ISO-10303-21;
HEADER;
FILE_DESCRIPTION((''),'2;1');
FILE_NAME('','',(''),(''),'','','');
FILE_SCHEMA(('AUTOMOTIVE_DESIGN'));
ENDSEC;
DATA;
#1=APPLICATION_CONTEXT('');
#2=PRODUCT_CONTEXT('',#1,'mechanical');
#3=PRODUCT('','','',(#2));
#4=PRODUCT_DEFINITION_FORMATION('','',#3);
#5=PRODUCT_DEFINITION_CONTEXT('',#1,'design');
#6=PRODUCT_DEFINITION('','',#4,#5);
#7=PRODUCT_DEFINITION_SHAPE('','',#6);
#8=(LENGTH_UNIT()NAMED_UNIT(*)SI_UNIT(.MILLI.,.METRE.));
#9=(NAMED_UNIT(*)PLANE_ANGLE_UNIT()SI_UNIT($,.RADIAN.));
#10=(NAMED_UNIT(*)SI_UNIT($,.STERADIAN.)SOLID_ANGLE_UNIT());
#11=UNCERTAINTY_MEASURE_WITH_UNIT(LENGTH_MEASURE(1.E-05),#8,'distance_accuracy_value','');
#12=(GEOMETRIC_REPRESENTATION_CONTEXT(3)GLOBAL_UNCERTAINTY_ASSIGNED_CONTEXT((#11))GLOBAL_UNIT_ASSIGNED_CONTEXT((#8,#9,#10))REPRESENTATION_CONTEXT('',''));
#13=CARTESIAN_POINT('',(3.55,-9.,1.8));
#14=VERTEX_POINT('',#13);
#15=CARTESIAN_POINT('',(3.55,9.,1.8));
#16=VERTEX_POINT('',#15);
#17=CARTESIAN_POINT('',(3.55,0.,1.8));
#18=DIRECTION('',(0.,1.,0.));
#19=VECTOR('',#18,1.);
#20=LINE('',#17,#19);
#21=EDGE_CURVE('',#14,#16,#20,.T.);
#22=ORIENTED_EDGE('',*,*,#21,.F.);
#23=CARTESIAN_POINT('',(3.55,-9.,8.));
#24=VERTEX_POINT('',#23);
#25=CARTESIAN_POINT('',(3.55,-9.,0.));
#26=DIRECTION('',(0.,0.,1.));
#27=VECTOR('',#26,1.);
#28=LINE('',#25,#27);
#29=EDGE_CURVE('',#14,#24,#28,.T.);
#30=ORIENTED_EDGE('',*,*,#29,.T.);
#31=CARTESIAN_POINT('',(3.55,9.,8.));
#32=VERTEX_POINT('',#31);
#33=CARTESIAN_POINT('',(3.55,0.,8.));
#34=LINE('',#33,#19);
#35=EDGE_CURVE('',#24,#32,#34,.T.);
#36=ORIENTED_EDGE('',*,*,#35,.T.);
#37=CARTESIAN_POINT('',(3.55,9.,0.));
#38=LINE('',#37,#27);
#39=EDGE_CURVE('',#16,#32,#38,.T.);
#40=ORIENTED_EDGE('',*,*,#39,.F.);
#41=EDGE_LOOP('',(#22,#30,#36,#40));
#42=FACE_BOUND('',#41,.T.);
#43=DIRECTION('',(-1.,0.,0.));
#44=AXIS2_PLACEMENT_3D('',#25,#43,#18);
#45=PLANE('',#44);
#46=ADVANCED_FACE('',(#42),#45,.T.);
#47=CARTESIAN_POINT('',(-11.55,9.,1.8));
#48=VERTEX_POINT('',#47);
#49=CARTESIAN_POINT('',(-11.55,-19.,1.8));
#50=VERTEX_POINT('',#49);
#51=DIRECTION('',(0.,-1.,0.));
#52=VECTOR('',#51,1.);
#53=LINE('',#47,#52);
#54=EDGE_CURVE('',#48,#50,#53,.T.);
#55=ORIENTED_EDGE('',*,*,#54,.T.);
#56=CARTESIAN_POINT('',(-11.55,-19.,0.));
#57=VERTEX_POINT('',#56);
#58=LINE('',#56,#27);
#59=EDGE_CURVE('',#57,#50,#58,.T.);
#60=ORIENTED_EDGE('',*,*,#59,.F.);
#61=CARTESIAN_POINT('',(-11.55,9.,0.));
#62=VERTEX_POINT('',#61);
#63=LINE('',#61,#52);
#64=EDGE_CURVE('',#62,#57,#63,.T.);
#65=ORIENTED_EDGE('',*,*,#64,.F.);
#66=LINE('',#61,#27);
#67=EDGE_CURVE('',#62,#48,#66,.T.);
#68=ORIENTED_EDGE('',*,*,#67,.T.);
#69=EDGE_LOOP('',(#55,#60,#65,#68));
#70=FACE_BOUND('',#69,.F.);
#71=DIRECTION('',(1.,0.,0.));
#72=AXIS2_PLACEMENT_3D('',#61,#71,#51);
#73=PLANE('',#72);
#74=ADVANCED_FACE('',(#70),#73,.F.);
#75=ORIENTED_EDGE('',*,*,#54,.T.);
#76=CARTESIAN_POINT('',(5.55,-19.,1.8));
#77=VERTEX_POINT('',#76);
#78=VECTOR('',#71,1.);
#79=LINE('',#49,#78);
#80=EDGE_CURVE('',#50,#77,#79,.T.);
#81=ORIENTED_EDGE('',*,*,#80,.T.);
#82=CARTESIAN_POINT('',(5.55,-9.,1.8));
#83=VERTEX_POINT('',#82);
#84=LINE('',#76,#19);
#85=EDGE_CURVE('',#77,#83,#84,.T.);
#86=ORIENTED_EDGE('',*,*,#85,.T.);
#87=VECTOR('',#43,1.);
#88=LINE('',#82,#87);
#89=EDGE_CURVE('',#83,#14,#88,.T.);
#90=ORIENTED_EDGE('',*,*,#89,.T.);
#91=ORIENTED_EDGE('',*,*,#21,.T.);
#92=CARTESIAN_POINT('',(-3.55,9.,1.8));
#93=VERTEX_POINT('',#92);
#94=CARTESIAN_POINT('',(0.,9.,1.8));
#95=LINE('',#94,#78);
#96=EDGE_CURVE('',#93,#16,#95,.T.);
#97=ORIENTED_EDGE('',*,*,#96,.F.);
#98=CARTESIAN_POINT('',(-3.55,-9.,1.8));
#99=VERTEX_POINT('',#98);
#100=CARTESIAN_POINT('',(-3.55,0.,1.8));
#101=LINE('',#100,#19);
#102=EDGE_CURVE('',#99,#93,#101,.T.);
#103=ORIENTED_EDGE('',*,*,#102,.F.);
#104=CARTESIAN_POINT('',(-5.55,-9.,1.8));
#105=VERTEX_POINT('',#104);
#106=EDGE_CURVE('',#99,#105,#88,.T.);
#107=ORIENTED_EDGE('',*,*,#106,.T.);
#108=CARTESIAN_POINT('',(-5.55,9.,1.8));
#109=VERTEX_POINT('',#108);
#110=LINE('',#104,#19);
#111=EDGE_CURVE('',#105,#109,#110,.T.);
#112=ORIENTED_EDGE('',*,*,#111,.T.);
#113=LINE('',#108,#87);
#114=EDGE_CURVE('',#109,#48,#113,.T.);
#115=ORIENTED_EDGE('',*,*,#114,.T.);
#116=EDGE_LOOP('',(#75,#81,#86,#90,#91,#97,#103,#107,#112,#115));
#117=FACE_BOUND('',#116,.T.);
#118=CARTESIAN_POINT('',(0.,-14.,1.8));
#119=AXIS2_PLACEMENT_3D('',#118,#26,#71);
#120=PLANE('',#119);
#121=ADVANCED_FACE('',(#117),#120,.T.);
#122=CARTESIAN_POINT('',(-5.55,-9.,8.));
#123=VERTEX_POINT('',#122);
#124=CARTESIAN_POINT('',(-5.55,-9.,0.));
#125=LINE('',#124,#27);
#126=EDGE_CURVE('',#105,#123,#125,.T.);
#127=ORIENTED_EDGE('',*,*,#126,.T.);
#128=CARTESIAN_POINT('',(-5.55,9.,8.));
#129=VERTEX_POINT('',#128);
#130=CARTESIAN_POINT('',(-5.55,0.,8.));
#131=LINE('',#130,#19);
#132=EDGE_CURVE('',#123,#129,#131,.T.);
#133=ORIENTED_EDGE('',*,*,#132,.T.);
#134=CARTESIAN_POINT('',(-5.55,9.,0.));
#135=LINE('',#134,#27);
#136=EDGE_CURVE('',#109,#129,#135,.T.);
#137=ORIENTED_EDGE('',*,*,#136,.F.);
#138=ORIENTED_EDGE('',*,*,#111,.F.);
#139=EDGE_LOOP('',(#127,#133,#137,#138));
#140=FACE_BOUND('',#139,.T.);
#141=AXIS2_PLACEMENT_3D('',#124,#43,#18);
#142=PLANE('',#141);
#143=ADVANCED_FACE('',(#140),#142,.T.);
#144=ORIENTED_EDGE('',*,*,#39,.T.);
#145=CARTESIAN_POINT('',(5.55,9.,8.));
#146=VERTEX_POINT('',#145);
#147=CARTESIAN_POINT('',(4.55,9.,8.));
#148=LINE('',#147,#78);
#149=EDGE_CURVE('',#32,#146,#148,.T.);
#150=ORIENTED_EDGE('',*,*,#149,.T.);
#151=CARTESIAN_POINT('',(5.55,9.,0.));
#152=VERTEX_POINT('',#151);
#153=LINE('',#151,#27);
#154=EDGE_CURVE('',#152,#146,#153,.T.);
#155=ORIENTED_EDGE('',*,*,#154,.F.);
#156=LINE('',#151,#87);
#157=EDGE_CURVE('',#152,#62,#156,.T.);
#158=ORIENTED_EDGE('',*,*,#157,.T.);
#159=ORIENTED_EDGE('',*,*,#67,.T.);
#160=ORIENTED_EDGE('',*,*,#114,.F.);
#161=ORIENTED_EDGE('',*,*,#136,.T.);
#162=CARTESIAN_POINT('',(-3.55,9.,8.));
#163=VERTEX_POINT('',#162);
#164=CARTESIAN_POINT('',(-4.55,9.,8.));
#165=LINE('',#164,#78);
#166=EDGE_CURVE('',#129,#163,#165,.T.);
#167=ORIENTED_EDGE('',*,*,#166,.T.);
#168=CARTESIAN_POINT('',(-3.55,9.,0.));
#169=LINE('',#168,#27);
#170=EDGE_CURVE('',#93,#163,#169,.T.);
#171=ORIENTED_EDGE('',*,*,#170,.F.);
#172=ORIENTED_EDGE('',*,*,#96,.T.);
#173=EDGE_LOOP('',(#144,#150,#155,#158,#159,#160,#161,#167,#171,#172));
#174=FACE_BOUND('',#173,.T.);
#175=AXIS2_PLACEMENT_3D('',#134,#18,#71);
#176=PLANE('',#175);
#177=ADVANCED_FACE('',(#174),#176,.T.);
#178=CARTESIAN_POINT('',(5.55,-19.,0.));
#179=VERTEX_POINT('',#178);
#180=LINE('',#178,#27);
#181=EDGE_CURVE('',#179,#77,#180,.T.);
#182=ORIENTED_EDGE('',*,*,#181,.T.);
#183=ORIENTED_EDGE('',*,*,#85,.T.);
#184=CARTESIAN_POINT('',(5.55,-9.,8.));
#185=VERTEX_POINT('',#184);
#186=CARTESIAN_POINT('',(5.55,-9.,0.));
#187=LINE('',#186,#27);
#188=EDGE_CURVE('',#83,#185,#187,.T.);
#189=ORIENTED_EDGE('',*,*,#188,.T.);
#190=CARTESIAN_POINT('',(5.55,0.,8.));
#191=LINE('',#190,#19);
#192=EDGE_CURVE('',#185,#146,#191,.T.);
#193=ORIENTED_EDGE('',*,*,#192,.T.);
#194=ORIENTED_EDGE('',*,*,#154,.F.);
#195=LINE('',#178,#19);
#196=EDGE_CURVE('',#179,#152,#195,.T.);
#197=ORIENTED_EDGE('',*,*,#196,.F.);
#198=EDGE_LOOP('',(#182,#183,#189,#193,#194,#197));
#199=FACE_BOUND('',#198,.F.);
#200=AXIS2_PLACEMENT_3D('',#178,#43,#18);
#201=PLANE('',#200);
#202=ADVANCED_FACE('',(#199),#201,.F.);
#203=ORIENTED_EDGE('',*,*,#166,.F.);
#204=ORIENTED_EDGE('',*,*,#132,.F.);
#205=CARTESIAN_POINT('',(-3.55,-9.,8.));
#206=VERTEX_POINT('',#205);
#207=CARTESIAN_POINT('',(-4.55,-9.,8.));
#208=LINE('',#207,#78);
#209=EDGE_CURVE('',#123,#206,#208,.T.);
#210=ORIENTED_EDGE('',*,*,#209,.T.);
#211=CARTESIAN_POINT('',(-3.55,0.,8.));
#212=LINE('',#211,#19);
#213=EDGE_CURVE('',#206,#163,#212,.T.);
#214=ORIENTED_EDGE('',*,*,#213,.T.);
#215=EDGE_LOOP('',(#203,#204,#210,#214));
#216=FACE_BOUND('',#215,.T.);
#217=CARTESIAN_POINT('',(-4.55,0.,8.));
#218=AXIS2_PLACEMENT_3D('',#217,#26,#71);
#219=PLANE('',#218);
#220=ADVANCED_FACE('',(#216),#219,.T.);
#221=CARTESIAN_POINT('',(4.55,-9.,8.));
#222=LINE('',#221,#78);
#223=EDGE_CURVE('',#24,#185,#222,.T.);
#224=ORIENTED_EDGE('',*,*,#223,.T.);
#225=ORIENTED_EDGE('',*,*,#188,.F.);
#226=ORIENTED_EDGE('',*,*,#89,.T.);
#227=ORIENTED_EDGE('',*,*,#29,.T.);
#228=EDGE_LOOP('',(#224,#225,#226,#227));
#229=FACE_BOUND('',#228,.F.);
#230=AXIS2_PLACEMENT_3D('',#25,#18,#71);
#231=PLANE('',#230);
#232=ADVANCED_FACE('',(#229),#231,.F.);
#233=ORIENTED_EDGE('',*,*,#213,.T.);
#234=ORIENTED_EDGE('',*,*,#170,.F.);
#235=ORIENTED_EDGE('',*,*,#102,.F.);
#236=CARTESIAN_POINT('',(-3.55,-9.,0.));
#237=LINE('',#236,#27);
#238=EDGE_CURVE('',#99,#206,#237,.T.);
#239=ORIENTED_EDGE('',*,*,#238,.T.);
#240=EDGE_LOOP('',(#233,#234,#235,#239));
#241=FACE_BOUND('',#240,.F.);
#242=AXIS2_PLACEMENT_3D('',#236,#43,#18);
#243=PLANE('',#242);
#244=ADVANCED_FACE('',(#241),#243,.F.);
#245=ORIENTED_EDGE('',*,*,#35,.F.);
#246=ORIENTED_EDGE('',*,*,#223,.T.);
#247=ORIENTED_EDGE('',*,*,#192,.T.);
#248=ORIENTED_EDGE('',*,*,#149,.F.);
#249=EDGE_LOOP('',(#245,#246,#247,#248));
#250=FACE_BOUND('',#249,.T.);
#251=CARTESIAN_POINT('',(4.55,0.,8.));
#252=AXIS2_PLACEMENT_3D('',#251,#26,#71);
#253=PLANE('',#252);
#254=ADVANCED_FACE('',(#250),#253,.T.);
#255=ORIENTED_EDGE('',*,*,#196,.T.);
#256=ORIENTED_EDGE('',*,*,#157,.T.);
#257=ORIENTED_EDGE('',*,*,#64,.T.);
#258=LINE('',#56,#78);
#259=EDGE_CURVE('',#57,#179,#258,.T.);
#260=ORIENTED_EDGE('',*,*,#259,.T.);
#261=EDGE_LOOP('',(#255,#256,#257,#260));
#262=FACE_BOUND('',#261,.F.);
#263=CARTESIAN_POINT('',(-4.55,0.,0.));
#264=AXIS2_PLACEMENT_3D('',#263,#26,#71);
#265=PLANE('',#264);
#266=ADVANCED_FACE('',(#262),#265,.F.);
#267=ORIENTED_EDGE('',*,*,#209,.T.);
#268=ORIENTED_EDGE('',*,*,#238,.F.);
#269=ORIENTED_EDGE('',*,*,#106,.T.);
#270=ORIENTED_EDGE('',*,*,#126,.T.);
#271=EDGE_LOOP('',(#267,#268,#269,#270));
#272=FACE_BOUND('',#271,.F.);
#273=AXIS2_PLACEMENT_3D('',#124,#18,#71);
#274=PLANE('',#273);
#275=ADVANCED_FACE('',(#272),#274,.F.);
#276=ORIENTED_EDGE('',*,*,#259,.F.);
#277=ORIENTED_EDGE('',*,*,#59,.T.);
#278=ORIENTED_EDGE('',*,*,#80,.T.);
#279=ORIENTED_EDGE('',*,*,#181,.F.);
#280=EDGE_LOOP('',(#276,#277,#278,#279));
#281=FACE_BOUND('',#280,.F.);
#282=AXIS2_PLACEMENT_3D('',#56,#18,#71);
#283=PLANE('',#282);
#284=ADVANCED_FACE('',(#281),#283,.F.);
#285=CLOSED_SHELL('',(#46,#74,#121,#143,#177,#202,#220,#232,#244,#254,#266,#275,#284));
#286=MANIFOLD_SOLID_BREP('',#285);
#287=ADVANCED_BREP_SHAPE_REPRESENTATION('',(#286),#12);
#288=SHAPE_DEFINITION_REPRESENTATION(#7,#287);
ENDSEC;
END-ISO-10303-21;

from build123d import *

# Parameters (mm, degrees)
F0_W     = 7.1
F0_H     = 18
F1_DEPTH = 1.8
F0_W_2   = 2
F2_DEPTH = 8


# Not quite as in the source:
# - a feature names something its author has since deleted; it is built from what else it names


with BuildPart() as f1:
    # F0 (on Top) → F1 (new body)
    with BuildSketch(Plane.XY):
        Polygon((5.55, -9), (3.55, -9), (-3.55, -9), (-5.55, -9), (-5.55, -19), (5.55, -19), align=None)
        Rectangle(F0_W, F0_H)
        Polygon((-5.55, -19), (-5.55, -9), (-5.55, 9), (-11.55, 9), (-11.55, -19), align=None)
    extrude(amount=F1_DEPTH)

    # F0 (on Top) → F2 (join)
    with BuildSketch(Plane.XY):
        with Locations((-4.55, 0)):
            Rectangle(F0_W_2, F0_H)
        with Locations((4.55, 0)):
            Rectangle(F0_W_2, F0_H)
    extrude(amount=F2_DEPTH)


solid = f1.part
